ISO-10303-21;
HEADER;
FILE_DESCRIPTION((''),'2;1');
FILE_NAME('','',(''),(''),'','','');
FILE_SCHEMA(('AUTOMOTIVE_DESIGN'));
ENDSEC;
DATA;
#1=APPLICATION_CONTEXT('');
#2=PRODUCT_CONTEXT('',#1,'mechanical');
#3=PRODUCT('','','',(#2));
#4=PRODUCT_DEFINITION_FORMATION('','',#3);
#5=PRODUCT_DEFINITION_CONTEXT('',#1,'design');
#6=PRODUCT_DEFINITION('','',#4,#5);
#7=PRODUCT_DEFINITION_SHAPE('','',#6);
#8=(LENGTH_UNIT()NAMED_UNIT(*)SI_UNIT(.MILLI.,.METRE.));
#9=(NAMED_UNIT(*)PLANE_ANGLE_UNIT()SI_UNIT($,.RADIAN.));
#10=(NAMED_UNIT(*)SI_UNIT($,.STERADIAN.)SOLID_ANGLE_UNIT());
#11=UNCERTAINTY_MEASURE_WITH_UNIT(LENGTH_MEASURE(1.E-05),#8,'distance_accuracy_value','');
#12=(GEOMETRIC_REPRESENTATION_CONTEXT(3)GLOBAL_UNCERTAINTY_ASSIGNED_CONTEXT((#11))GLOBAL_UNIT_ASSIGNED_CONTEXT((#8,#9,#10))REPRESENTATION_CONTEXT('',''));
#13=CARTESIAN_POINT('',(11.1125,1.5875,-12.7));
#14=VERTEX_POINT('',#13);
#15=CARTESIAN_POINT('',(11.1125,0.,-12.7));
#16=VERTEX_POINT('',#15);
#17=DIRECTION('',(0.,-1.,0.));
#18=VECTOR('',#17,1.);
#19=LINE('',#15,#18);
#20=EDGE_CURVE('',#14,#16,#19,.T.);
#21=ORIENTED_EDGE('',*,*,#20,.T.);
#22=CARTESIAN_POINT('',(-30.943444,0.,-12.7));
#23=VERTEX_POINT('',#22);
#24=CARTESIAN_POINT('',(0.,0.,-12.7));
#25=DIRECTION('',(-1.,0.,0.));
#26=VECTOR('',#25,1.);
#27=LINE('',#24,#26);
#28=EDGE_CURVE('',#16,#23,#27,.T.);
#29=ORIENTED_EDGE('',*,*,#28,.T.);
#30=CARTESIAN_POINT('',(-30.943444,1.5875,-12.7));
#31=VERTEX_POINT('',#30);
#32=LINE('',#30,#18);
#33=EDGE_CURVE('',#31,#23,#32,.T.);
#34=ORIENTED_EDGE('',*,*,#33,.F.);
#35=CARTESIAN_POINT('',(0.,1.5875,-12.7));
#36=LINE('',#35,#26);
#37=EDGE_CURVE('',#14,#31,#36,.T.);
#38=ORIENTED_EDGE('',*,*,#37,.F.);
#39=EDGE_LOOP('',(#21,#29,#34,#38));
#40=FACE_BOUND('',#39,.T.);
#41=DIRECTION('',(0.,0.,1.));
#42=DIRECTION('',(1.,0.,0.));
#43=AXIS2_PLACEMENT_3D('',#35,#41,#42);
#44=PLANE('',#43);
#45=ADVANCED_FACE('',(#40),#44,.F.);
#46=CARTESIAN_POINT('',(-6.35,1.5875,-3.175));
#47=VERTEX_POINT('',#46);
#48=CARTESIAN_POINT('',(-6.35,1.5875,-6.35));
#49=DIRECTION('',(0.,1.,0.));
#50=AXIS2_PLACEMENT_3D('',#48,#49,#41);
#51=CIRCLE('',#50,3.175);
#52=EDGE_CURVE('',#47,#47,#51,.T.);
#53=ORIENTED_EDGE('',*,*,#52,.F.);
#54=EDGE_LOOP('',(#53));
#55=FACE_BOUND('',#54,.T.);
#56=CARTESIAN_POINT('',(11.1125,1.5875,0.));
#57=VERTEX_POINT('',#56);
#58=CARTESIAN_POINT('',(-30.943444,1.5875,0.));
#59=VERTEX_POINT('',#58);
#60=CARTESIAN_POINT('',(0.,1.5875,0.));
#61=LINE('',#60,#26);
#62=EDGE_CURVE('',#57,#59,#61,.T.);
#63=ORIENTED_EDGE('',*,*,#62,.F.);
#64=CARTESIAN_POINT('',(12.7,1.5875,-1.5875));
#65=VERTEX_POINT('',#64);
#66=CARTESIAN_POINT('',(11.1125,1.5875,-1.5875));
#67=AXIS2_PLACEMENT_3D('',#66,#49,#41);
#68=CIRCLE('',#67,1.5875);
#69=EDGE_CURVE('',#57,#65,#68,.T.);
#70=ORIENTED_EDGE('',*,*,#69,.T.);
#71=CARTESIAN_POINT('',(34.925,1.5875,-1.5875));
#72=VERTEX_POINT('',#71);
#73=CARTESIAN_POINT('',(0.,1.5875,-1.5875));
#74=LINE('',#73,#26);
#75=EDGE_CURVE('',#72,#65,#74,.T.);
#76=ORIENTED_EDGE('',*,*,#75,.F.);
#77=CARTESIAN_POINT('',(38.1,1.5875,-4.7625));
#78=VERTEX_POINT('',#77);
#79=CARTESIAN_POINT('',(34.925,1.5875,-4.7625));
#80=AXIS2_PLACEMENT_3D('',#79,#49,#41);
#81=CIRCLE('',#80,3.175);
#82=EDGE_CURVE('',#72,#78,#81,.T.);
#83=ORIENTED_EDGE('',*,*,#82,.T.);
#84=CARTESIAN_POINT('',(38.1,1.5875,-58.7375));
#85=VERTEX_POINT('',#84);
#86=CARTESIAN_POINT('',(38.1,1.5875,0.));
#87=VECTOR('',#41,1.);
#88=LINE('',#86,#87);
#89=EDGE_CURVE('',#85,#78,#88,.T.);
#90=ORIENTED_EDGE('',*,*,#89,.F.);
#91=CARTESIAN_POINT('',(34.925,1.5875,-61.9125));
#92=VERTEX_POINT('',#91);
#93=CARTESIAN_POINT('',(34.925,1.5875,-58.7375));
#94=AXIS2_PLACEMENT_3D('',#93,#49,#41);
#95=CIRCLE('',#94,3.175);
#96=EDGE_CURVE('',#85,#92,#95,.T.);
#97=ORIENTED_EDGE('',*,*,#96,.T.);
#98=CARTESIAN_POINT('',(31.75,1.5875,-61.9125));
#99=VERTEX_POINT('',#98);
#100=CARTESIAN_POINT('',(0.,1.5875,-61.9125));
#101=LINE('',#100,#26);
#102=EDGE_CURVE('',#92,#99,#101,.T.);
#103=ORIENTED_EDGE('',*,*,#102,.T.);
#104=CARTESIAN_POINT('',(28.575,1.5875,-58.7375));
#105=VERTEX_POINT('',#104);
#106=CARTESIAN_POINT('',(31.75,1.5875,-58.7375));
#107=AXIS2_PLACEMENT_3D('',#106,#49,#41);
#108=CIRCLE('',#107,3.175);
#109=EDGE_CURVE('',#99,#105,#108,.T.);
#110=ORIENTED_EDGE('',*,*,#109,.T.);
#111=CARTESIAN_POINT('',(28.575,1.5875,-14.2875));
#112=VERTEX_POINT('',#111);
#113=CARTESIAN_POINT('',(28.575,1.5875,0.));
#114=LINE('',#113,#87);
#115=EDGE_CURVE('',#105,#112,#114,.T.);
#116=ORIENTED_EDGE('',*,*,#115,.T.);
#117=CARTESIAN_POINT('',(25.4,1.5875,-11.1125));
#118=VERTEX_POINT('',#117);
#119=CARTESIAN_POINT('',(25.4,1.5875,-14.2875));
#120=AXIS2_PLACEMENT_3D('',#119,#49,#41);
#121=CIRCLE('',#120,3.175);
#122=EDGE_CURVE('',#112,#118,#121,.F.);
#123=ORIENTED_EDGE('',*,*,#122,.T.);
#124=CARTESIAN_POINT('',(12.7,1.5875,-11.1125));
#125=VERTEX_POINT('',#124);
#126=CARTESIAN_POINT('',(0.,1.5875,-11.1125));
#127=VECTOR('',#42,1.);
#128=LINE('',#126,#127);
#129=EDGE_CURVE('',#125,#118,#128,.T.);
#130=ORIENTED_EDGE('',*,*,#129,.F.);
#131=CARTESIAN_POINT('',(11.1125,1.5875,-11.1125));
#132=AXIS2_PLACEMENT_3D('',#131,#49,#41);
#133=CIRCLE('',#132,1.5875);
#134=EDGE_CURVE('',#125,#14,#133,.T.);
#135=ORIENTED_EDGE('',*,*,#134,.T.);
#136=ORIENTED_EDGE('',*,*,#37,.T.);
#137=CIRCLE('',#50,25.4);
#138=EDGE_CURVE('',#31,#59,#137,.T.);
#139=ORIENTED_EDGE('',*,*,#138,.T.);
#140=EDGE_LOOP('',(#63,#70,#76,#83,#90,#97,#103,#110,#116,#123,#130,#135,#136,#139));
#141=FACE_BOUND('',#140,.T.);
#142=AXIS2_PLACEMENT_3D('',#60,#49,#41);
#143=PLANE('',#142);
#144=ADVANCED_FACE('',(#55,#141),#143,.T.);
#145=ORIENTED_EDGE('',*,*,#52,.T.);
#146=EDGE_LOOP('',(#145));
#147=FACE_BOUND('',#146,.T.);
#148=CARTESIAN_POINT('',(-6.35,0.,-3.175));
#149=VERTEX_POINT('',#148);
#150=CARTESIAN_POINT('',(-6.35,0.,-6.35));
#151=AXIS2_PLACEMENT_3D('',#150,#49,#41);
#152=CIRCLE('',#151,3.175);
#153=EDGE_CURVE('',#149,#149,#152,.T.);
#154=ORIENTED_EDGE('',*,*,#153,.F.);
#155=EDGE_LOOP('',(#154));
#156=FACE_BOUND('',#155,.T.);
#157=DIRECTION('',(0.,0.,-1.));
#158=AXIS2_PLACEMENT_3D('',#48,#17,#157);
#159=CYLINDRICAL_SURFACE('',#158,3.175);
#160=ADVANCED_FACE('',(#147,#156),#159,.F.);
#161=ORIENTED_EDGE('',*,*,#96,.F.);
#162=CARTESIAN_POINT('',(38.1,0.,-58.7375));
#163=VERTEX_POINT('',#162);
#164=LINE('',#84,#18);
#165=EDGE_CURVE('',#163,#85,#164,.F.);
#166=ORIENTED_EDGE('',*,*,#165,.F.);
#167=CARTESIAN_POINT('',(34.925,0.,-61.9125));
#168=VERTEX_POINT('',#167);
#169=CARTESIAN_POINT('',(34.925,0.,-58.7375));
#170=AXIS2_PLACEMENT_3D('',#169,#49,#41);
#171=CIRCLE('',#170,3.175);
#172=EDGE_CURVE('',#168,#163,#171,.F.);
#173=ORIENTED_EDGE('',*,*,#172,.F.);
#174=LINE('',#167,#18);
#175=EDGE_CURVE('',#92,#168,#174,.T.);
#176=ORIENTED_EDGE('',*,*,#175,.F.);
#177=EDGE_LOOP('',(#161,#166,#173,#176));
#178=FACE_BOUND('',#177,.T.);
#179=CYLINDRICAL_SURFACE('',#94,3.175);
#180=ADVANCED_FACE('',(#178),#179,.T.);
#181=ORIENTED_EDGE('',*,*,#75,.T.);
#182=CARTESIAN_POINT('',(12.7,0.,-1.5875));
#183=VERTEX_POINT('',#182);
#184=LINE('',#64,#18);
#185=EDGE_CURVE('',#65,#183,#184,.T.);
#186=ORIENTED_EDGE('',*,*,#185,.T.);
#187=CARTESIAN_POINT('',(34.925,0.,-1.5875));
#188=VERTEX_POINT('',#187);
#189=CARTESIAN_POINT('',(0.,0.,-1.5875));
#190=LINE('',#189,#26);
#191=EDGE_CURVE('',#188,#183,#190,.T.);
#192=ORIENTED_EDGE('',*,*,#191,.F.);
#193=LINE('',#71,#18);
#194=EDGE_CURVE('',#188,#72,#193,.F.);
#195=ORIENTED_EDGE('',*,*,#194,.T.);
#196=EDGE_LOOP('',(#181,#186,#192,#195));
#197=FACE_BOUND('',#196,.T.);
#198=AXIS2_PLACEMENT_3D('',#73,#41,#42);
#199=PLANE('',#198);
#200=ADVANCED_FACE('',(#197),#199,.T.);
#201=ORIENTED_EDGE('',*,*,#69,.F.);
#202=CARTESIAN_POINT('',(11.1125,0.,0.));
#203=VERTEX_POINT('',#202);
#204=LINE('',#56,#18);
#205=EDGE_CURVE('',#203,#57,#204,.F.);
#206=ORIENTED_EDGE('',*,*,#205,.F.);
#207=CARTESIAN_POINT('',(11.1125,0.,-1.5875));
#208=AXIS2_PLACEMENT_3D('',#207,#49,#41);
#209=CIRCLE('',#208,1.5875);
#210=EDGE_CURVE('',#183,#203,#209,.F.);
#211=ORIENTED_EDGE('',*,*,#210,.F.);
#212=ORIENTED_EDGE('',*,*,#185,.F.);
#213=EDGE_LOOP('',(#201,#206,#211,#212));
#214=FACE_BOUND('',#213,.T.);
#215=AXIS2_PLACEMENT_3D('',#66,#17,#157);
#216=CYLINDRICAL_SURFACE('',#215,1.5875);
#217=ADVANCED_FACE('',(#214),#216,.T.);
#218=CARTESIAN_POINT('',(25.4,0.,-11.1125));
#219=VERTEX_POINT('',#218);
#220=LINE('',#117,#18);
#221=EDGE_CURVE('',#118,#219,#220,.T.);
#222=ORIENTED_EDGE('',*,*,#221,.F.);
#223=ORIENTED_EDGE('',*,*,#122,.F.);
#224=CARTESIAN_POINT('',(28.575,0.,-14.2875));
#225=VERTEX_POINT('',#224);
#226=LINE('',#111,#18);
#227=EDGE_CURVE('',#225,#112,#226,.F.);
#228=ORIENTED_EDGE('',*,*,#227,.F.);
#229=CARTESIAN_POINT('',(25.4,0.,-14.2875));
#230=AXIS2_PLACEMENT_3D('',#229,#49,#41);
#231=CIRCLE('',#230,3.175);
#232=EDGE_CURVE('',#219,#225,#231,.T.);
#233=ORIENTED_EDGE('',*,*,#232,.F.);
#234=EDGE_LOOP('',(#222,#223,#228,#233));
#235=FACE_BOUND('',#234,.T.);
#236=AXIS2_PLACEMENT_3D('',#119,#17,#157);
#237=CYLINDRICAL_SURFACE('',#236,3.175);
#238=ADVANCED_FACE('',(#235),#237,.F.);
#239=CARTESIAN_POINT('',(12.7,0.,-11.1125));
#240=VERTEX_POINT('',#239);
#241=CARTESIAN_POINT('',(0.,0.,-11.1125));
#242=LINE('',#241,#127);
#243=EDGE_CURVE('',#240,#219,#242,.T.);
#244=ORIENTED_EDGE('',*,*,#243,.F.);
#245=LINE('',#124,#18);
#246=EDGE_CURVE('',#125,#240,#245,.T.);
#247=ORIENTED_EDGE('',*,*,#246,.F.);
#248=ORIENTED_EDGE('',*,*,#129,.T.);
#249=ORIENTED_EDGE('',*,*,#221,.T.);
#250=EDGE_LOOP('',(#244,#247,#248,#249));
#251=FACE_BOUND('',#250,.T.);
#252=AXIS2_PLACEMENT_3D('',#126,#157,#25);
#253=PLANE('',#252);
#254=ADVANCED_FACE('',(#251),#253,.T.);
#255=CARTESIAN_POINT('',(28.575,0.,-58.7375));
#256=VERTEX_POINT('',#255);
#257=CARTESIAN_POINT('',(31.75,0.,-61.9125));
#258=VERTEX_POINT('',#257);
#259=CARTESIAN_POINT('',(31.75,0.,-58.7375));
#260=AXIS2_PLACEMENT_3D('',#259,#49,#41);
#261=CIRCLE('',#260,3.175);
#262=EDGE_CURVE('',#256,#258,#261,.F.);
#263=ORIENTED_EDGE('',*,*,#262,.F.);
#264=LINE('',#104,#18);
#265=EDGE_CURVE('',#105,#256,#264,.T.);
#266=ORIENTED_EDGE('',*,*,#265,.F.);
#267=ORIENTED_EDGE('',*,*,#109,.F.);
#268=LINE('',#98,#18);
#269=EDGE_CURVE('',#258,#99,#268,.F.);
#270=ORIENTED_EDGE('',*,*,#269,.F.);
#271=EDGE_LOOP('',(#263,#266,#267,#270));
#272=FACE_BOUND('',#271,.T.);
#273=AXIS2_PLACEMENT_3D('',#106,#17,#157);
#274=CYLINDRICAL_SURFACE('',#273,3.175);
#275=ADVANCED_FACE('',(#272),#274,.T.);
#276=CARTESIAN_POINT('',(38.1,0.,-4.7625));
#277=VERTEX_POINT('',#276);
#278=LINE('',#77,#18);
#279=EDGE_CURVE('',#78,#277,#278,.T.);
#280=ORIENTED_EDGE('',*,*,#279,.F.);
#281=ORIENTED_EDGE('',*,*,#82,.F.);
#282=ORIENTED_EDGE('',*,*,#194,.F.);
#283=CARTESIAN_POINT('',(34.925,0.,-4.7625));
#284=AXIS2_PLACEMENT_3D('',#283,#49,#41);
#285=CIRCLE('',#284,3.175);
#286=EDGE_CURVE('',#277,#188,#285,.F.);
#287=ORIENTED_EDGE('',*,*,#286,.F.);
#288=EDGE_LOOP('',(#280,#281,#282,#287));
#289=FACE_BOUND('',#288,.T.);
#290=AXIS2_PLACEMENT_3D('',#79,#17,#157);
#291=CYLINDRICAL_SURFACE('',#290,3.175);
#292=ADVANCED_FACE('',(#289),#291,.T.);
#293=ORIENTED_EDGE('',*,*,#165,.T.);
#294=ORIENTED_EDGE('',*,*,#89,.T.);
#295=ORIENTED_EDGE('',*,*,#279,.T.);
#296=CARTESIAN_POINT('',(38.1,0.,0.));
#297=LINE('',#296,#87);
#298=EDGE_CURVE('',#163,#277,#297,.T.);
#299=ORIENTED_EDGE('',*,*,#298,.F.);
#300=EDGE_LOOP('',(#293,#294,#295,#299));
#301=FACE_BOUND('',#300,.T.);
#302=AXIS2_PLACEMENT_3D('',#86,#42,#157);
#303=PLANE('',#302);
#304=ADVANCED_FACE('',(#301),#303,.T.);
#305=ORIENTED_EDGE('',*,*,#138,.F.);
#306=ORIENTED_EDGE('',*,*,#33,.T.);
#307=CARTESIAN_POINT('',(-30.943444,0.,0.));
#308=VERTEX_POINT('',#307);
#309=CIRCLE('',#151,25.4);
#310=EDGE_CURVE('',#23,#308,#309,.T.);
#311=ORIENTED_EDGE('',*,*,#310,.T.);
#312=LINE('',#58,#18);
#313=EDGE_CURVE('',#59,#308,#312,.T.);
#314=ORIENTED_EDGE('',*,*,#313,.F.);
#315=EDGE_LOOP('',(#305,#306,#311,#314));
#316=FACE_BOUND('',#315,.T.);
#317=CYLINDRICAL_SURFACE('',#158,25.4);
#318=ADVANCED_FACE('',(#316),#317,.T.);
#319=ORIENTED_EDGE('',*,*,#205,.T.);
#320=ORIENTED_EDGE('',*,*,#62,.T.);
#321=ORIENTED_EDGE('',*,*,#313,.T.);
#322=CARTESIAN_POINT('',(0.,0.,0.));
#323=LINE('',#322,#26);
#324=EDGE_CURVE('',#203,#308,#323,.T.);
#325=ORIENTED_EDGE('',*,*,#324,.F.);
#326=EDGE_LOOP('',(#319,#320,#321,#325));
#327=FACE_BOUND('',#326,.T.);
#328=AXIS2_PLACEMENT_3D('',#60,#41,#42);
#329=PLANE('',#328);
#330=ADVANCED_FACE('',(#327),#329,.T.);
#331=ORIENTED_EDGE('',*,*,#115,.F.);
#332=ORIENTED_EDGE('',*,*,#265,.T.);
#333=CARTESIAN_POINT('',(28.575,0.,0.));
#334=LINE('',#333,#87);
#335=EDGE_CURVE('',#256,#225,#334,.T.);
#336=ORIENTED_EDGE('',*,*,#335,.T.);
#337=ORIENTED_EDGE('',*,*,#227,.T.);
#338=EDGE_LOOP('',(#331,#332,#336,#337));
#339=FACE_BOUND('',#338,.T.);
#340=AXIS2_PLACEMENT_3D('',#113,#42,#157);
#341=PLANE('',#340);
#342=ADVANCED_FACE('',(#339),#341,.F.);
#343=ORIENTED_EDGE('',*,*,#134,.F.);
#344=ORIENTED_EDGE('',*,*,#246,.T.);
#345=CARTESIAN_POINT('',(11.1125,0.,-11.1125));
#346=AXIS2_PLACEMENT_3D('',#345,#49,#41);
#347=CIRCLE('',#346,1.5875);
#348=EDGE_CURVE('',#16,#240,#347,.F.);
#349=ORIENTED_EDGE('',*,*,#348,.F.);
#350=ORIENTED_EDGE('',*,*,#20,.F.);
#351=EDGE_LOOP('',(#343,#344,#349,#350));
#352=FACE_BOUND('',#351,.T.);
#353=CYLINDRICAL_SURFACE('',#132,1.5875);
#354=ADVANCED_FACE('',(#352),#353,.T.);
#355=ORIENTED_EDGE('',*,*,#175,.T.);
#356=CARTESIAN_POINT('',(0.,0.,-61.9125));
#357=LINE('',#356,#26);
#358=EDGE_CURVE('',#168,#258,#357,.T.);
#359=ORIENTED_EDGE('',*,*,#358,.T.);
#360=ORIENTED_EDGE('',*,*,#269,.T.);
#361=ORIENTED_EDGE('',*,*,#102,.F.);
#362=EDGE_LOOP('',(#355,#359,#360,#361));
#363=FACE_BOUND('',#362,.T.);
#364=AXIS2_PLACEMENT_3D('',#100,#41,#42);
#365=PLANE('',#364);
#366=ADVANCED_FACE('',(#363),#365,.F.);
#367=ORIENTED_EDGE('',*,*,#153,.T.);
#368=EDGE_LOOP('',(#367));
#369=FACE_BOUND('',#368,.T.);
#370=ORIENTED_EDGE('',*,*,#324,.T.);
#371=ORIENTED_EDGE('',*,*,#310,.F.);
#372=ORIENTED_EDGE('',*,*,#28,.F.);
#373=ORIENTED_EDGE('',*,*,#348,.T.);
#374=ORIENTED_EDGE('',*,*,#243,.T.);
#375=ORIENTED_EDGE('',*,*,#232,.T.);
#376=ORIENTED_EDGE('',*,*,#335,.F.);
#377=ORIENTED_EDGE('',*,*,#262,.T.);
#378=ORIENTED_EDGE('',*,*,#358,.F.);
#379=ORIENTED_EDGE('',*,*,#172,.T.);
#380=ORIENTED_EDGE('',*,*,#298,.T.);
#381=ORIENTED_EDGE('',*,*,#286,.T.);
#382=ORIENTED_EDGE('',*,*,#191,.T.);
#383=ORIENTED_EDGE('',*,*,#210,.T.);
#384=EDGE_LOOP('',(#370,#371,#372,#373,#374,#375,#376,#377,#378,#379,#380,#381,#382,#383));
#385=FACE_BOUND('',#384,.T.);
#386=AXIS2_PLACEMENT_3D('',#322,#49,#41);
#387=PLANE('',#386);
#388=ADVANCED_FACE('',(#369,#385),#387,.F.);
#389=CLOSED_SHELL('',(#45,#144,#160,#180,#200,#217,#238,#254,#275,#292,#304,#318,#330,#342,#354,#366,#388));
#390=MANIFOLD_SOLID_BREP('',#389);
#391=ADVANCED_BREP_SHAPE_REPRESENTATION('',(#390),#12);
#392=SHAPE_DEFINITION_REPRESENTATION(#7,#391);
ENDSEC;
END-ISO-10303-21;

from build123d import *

# Parameters (mm, degrees)
SKETCH1_R           = 3.175
BOSS_EXTRUDE1_DEPTH = 1.5875
FILLET1_R           = 3.175
FILLET2_R           = 1.5875


with BuildPart() as part:
    # Sketch1 → Boss-Extrude1 (new body)
    with BuildSketch(Plane(origin=(0, 0, 0), x_dir=(1, 0, 0), z_dir=(0, 1, 0))):
        with BuildLine():
            Line((-30.943444248, 0), (12.7, 0))
            Line((12.7, 0), (12.7, 1.5875))
            Line((12.7, 1.5875), (38.1, 1.5875))
            Line((38.1, 1.5875), (38.1, 61.9125))
            Line((38.1, 61.9125), (28.575, 61.9125))
            Line((28.575, 61.9125), (28.575, 11.1125))
            Line((28.575, 11.1125), (12.7, 11.1125))
            Line((12.7, 11.1125), (12.7, 12.7))
            Line((12.7, 12.7), (-30.943444248, 12.7))
            ThreePointArc((-30.943444248, 12.7), (-31.75, 6.35), (-30.943444248, 0))
        make_face()
        with Locations(Location((-6.35, 6.35, 0), (0, 0, 270))):
            Circle(SKETCH1_R, mode=Mode.SUBTRACT)
    extrude(amount=BOSS_EXTRUDE1_DEPTH)

    # Fillet1
    fillet1_edges = [part.edges().sort_by_distance(p)[0] for p in [
        (28.575, 0.79375, -11.1125),
        (28.575, 0.79375, -61.9125),
        (38.1, 0.79375, -61.9125),
        (38.1, 0.79375, -1.5875),
    ]]
    fillet(fillet1_edges, radius=FILLET1_R)

    # Fillet2
    fillet2_edges = [part.edges().sort_by_distance(p)[0] for p in [
        (12.7, 0.79375, 0),
        (12.7, 0.79375, -12.7),
    ]]
    fillet(fillet2_edges, radius=FILLET2_R - 0.0001)  # a hair under: the kernel refuses the full size


solid = part.part
